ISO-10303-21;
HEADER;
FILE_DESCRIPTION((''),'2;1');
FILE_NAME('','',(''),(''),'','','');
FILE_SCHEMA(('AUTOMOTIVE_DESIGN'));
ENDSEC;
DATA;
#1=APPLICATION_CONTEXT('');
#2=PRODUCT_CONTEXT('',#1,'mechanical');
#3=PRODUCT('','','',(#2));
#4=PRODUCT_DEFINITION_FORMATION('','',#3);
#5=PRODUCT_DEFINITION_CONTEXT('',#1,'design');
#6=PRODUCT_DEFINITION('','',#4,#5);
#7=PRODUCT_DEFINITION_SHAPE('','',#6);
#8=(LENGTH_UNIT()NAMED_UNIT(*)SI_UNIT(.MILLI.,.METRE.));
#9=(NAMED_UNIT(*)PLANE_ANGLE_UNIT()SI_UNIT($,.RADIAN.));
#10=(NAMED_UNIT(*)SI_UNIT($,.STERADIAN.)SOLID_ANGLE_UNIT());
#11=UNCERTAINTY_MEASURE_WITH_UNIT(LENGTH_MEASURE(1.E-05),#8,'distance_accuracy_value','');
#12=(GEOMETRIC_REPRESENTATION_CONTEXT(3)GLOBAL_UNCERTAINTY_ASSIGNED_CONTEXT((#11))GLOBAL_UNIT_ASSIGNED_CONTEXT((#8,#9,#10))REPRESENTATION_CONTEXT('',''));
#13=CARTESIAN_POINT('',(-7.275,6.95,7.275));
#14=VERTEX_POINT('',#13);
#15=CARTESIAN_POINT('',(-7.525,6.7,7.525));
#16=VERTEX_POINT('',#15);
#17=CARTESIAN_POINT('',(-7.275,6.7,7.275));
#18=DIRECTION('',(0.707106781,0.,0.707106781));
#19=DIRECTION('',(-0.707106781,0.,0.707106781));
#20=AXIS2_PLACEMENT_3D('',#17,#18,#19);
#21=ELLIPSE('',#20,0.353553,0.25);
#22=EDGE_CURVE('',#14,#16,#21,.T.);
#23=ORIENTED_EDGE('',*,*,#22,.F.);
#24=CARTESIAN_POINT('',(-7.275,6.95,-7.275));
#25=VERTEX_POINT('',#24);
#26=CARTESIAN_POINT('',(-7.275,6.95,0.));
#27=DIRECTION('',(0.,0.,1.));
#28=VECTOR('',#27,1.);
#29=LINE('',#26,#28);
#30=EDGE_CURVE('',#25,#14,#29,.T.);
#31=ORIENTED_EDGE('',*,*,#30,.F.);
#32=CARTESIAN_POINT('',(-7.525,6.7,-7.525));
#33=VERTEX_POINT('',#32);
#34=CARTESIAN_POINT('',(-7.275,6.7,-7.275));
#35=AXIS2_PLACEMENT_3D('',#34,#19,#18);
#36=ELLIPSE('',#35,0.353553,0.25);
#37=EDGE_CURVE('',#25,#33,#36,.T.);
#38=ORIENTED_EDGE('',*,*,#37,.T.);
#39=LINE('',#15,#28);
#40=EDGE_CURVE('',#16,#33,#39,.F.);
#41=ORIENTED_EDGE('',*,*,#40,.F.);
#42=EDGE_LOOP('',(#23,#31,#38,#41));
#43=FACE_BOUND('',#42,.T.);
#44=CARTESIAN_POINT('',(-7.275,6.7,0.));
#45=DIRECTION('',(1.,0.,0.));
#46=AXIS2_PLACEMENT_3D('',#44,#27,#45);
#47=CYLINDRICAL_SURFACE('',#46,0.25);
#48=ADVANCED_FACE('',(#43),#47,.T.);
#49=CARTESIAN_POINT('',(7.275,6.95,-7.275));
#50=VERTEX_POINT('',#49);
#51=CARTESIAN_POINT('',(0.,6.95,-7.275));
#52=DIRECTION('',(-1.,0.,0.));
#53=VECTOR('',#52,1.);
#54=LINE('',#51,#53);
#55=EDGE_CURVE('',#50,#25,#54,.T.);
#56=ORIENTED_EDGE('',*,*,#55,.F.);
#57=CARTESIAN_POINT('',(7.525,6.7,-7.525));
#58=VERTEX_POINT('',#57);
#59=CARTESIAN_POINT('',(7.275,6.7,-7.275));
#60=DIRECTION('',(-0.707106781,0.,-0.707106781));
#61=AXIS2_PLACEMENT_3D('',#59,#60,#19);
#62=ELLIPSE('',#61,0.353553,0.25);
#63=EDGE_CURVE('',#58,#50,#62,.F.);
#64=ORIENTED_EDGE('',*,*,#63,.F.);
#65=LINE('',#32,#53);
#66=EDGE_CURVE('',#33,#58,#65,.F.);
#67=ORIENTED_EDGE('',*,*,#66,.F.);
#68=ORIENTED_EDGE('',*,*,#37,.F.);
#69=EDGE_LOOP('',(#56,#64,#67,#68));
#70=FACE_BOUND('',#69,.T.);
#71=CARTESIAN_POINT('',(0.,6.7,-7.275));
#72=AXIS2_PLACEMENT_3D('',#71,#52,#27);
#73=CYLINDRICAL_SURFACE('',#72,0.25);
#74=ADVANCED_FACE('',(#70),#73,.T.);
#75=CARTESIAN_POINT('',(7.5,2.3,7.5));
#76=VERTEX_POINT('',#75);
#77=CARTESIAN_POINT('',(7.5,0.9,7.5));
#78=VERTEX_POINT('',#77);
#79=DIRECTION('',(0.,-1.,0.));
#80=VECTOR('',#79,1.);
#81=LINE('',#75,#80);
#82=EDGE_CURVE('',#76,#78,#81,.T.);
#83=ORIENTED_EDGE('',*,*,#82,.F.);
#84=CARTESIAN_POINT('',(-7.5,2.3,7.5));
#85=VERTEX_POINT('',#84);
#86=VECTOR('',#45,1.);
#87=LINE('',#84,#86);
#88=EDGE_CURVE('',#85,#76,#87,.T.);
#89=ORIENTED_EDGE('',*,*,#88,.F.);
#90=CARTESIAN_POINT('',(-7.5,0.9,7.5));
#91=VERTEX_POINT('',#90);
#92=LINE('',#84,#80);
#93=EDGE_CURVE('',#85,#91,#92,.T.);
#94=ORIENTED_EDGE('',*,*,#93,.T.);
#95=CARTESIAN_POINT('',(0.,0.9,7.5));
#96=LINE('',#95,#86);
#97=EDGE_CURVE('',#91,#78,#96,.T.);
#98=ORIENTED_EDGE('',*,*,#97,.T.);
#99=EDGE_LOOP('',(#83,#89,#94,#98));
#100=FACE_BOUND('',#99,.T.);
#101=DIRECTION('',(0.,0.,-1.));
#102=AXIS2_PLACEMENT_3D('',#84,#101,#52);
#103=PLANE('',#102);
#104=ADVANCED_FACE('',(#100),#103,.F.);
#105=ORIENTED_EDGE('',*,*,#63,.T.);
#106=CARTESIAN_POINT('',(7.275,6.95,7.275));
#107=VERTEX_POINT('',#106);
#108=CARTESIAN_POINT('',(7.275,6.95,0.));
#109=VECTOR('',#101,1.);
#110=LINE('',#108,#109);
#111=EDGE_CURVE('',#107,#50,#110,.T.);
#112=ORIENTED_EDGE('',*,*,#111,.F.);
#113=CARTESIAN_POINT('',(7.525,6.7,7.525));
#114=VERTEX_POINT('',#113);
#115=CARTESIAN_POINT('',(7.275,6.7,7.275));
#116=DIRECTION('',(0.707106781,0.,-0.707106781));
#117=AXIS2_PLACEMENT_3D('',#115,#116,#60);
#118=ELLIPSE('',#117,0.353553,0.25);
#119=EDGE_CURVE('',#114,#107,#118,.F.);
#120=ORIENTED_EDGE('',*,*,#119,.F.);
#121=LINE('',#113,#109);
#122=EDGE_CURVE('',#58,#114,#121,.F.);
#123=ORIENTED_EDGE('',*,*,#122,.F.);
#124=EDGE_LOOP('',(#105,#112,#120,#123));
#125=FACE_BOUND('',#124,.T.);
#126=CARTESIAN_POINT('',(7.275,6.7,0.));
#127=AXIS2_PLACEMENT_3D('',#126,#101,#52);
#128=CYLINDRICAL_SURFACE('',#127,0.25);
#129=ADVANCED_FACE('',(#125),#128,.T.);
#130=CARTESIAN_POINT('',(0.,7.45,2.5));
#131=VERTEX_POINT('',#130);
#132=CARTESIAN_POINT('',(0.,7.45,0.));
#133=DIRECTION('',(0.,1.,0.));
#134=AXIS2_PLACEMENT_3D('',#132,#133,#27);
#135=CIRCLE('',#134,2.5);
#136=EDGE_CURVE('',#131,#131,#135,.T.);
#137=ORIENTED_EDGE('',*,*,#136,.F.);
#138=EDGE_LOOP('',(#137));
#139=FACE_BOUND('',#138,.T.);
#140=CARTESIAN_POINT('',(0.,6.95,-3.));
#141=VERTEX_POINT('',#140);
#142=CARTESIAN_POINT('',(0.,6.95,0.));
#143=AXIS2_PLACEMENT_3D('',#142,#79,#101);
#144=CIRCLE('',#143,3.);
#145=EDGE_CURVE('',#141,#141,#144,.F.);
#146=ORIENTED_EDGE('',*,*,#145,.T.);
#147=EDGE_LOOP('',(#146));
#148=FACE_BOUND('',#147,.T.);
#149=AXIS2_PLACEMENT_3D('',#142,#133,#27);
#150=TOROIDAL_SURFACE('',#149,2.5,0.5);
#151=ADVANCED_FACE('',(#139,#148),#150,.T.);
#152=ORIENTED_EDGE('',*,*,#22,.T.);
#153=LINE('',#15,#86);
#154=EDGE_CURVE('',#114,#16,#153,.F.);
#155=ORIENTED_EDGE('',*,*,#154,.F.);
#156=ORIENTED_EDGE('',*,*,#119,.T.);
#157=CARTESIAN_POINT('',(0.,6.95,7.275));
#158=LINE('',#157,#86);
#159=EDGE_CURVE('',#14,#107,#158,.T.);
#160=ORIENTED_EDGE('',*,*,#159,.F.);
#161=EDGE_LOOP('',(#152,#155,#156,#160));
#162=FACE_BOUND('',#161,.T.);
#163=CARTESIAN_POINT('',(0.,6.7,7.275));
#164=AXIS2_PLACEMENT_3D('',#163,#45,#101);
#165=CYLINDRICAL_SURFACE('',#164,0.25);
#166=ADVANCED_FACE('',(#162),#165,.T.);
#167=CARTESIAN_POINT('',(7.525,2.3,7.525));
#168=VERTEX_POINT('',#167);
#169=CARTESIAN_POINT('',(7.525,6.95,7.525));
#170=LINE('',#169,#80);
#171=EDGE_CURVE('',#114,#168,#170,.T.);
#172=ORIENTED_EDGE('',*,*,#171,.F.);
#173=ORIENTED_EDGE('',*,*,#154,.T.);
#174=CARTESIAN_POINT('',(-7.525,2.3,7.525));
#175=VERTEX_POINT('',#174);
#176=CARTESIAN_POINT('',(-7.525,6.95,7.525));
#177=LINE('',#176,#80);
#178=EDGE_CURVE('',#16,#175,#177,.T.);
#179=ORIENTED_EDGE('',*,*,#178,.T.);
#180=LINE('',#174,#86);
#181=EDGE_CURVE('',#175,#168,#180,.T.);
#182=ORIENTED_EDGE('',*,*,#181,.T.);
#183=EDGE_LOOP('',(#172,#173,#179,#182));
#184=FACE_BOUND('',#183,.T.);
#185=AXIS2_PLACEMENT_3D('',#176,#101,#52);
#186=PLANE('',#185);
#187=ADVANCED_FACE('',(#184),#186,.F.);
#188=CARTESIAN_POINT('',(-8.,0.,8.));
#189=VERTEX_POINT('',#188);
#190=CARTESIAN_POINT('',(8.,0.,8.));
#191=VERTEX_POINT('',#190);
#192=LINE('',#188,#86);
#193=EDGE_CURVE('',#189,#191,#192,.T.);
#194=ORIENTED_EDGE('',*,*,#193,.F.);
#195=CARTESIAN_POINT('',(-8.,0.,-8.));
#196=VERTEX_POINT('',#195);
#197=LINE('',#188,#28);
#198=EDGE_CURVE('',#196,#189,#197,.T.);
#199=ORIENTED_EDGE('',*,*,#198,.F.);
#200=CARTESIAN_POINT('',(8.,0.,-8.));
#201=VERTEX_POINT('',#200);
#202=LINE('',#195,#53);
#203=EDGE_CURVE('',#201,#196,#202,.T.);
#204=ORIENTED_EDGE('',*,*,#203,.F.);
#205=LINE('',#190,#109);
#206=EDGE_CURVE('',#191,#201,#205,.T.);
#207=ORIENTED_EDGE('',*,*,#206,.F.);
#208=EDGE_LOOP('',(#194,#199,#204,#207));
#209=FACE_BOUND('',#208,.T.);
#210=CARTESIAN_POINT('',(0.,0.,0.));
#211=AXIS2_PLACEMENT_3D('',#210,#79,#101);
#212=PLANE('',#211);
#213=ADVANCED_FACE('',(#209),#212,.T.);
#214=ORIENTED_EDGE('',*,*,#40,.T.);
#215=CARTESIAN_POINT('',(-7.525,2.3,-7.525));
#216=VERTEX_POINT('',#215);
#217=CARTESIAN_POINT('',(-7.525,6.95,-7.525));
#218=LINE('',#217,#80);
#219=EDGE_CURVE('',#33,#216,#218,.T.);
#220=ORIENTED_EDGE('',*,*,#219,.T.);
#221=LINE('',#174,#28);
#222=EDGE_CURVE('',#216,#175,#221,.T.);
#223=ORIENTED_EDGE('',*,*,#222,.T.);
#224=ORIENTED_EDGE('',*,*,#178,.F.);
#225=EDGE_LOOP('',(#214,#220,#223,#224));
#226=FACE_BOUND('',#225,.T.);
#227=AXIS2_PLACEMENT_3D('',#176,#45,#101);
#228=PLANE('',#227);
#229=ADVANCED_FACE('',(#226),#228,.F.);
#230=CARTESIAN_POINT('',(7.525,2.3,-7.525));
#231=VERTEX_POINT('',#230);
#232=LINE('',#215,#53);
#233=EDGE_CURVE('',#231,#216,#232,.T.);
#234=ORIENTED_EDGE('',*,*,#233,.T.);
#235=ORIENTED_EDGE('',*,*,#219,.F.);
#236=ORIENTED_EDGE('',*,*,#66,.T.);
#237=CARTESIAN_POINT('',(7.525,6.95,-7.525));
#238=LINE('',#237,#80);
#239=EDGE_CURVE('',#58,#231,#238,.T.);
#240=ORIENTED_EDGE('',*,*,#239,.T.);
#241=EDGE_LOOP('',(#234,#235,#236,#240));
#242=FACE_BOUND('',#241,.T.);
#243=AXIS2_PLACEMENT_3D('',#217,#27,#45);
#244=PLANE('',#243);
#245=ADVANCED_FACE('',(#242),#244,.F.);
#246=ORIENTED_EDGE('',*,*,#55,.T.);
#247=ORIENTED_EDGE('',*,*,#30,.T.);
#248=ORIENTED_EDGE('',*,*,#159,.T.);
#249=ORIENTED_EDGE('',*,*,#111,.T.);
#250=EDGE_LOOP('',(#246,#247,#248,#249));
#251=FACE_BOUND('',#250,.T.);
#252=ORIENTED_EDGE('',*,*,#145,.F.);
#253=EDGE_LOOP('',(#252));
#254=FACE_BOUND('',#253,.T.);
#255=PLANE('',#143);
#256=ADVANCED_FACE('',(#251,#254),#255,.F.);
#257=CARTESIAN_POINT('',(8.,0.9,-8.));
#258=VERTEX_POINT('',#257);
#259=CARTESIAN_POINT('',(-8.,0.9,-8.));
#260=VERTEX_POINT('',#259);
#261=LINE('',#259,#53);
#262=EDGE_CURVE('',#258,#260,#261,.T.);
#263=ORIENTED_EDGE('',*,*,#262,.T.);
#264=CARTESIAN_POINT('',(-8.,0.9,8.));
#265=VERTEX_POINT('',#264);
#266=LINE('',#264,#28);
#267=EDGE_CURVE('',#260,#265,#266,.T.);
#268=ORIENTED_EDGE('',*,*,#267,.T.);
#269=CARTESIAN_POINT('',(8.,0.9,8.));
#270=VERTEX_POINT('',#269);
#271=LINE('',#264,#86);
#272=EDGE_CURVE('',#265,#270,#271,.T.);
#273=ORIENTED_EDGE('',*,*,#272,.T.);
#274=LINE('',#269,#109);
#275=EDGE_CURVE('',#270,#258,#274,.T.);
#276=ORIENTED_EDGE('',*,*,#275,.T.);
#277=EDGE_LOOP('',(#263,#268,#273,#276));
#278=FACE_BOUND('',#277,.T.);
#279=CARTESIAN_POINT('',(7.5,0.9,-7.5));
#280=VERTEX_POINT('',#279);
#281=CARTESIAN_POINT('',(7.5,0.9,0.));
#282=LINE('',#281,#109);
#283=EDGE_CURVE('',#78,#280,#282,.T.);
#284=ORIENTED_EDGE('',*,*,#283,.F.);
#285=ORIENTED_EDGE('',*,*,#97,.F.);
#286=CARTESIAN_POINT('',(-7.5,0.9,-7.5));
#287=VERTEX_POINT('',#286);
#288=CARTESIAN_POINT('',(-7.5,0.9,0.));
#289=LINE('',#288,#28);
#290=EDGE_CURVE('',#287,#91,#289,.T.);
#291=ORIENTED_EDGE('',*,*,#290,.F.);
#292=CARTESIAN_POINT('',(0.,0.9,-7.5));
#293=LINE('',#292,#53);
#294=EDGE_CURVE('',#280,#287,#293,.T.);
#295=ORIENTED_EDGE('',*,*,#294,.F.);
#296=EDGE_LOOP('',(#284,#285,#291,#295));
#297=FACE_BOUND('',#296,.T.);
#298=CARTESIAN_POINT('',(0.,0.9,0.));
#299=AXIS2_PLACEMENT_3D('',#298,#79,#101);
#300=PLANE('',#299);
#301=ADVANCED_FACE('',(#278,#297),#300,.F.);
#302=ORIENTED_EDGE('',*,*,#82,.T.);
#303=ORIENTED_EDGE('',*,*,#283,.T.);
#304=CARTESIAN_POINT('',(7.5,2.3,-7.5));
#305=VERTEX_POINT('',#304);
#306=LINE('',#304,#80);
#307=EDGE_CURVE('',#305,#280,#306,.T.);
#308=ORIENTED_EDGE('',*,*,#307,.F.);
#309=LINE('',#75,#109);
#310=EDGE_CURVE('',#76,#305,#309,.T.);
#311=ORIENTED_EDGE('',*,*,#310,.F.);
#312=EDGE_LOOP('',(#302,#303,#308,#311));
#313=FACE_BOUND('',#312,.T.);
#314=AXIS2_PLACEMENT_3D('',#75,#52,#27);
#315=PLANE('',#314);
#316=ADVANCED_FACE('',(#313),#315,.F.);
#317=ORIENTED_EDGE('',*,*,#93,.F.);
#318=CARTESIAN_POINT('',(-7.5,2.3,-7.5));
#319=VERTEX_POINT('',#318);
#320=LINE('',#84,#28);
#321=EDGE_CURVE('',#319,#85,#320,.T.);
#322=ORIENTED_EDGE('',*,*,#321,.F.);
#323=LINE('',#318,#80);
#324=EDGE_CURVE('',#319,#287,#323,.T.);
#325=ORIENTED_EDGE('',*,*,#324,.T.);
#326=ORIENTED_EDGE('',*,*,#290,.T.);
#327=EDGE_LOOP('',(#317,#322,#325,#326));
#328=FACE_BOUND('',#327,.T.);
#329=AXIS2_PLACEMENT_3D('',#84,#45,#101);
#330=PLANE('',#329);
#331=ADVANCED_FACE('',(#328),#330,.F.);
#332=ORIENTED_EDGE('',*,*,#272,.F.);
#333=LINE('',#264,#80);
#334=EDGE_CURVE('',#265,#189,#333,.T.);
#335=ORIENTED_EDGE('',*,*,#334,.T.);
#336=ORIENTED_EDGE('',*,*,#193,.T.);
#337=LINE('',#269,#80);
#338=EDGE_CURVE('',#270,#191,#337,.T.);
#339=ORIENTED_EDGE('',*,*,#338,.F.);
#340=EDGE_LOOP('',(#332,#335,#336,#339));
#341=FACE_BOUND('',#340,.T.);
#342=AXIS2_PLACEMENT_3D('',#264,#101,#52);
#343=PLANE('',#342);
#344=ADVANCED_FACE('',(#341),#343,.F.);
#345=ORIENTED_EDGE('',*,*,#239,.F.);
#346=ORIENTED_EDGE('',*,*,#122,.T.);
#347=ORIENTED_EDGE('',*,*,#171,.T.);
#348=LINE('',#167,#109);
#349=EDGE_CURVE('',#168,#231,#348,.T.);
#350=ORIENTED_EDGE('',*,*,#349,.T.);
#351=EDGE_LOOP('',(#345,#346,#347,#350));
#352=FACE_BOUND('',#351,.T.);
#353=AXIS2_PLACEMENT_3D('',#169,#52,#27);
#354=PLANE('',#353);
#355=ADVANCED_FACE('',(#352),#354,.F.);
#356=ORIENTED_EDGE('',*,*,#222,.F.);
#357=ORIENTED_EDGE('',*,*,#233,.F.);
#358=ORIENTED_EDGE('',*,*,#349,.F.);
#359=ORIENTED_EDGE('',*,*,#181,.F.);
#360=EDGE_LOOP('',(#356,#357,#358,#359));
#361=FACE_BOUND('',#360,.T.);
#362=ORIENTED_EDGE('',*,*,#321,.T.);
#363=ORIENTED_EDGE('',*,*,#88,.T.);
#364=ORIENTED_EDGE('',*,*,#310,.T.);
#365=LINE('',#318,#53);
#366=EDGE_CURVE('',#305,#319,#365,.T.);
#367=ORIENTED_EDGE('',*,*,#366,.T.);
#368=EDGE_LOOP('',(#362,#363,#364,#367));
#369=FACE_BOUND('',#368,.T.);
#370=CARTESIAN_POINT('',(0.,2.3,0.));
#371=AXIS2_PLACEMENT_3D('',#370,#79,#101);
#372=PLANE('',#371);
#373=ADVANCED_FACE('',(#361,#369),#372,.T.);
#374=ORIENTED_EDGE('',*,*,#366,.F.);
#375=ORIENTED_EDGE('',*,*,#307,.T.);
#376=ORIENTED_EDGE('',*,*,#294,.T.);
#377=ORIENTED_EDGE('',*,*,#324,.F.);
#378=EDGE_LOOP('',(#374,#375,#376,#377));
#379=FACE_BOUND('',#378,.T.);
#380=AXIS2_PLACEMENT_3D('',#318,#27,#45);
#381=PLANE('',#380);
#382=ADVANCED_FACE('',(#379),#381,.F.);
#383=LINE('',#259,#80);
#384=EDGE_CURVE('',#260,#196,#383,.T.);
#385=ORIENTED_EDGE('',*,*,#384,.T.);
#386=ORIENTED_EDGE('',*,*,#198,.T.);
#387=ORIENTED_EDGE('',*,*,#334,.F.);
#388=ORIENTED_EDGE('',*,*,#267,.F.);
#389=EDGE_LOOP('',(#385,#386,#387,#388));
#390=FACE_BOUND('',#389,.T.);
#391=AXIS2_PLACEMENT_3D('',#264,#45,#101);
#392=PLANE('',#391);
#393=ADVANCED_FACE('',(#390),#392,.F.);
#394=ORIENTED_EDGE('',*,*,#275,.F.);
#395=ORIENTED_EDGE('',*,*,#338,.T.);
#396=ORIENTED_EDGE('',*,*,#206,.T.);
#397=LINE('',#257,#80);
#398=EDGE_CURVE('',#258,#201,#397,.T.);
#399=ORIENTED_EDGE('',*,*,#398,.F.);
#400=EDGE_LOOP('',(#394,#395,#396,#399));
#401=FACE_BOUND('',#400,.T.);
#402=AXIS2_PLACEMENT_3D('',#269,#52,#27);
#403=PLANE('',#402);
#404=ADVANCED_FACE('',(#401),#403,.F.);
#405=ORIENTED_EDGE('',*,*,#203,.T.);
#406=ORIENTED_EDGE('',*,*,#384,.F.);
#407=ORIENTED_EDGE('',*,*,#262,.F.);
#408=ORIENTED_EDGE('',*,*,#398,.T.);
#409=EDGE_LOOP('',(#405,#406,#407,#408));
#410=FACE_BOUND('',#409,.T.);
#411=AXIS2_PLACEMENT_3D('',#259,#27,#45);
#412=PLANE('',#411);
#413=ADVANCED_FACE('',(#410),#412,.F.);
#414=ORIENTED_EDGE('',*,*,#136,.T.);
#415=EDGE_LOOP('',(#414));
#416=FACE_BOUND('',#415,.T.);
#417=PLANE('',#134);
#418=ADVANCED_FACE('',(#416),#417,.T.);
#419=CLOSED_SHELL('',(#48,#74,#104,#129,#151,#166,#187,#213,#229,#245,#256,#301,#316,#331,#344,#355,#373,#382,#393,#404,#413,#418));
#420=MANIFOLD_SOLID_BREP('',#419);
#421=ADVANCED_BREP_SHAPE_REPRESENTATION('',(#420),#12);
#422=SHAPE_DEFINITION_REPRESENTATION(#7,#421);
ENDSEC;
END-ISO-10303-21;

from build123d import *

# Parameters (mm, degrees)
ESQUISSE1_W        = 16
ESQUISSE1_H        = 16
BOSS_EXTRU_1_DEPTH = 0.9
ESQUISSE2_W        = 15
ESQUISSE2_H        = 15
BOSS_EXTRU_2_DEPTH = 2.3
ESQUISSE3_W        = 15.05
ESQUISSE3_H        = 15.05
BOSS_EXTRU_3_DEPTH = 4.65
ESQUISSE4_R        = 3
BOSS_EXTRU_4_DEPTH = 0.5
CONG_1_R           = 0.5
CONG_2_R           = 0.25


with BuildPart() as part:
    # Esquisse1 → Boss.-Extru.1 (new body)
    with BuildSketch(Plane(origin=(0, 0, 0), x_dir=(1, 0, 0), z_dir=(0, 1, 0))):
        Rectangle(ESQUISSE1_W, ESQUISSE1_H)
    extrude(amount=BOSS_EXTRU_1_DEPTH)

    # Esquisse2 → Boss.-Extru.2 (add)
    with BuildSketch(Plane(origin=(0, 0, 0), x_dir=(1, 0, 0), z_dir=(0, 1, 0))):
        Rectangle(ESQUISSE2_W, ESQUISSE2_H)
    extrude(amount=BOSS_EXTRU_2_DEPTH)

    # Esquisse3 → Boss.-Extru.3 (add)
    with BuildSketch(Plane(origin=(0, 2.3, 0), x_dir=(1, 0, 0), z_dir=(0, 1, 0))):
        Rectangle(ESQUISSE3_W, ESQUISSE3_H)
    extrude(amount=BOSS_EXTRU_3_DEPTH)

    # Esquisse4 → Boss.-Extru.4 (add)
    with BuildSketch(Plane(origin=(0, 6.95, 0), x_dir=(1, 0, 0), z_dir=(0, 1, 0))):
        with Locations(Location((0, 0, 0), (0, 0, 90))):
            Circle(ESQUISSE4_R)
    extrude(amount=BOSS_EXTRU_4_DEPTH)

    # Congé1
    cong_1_edges = [part.edges().sort_by_distance(p)[0] for p in [
        (0, 7.45, 3),
    ]]
    fillet(cong_1_edges, radius=CONG_1_R - 0.0001)  # a hair under: the kernel refuses the full size

    # Congé2
    cong_2_edges = [part.edges().sort_by_distance(p)[0] for p in [
        (7.525, 6.95, 0),
        (0, 6.95, -7.525),
        (-7.525, 6.95, 0),
        (0, 6.95, 7.525),
    ]]
    fillet(cong_2_edges, radius=CONG_2_R)


solid = part.part
